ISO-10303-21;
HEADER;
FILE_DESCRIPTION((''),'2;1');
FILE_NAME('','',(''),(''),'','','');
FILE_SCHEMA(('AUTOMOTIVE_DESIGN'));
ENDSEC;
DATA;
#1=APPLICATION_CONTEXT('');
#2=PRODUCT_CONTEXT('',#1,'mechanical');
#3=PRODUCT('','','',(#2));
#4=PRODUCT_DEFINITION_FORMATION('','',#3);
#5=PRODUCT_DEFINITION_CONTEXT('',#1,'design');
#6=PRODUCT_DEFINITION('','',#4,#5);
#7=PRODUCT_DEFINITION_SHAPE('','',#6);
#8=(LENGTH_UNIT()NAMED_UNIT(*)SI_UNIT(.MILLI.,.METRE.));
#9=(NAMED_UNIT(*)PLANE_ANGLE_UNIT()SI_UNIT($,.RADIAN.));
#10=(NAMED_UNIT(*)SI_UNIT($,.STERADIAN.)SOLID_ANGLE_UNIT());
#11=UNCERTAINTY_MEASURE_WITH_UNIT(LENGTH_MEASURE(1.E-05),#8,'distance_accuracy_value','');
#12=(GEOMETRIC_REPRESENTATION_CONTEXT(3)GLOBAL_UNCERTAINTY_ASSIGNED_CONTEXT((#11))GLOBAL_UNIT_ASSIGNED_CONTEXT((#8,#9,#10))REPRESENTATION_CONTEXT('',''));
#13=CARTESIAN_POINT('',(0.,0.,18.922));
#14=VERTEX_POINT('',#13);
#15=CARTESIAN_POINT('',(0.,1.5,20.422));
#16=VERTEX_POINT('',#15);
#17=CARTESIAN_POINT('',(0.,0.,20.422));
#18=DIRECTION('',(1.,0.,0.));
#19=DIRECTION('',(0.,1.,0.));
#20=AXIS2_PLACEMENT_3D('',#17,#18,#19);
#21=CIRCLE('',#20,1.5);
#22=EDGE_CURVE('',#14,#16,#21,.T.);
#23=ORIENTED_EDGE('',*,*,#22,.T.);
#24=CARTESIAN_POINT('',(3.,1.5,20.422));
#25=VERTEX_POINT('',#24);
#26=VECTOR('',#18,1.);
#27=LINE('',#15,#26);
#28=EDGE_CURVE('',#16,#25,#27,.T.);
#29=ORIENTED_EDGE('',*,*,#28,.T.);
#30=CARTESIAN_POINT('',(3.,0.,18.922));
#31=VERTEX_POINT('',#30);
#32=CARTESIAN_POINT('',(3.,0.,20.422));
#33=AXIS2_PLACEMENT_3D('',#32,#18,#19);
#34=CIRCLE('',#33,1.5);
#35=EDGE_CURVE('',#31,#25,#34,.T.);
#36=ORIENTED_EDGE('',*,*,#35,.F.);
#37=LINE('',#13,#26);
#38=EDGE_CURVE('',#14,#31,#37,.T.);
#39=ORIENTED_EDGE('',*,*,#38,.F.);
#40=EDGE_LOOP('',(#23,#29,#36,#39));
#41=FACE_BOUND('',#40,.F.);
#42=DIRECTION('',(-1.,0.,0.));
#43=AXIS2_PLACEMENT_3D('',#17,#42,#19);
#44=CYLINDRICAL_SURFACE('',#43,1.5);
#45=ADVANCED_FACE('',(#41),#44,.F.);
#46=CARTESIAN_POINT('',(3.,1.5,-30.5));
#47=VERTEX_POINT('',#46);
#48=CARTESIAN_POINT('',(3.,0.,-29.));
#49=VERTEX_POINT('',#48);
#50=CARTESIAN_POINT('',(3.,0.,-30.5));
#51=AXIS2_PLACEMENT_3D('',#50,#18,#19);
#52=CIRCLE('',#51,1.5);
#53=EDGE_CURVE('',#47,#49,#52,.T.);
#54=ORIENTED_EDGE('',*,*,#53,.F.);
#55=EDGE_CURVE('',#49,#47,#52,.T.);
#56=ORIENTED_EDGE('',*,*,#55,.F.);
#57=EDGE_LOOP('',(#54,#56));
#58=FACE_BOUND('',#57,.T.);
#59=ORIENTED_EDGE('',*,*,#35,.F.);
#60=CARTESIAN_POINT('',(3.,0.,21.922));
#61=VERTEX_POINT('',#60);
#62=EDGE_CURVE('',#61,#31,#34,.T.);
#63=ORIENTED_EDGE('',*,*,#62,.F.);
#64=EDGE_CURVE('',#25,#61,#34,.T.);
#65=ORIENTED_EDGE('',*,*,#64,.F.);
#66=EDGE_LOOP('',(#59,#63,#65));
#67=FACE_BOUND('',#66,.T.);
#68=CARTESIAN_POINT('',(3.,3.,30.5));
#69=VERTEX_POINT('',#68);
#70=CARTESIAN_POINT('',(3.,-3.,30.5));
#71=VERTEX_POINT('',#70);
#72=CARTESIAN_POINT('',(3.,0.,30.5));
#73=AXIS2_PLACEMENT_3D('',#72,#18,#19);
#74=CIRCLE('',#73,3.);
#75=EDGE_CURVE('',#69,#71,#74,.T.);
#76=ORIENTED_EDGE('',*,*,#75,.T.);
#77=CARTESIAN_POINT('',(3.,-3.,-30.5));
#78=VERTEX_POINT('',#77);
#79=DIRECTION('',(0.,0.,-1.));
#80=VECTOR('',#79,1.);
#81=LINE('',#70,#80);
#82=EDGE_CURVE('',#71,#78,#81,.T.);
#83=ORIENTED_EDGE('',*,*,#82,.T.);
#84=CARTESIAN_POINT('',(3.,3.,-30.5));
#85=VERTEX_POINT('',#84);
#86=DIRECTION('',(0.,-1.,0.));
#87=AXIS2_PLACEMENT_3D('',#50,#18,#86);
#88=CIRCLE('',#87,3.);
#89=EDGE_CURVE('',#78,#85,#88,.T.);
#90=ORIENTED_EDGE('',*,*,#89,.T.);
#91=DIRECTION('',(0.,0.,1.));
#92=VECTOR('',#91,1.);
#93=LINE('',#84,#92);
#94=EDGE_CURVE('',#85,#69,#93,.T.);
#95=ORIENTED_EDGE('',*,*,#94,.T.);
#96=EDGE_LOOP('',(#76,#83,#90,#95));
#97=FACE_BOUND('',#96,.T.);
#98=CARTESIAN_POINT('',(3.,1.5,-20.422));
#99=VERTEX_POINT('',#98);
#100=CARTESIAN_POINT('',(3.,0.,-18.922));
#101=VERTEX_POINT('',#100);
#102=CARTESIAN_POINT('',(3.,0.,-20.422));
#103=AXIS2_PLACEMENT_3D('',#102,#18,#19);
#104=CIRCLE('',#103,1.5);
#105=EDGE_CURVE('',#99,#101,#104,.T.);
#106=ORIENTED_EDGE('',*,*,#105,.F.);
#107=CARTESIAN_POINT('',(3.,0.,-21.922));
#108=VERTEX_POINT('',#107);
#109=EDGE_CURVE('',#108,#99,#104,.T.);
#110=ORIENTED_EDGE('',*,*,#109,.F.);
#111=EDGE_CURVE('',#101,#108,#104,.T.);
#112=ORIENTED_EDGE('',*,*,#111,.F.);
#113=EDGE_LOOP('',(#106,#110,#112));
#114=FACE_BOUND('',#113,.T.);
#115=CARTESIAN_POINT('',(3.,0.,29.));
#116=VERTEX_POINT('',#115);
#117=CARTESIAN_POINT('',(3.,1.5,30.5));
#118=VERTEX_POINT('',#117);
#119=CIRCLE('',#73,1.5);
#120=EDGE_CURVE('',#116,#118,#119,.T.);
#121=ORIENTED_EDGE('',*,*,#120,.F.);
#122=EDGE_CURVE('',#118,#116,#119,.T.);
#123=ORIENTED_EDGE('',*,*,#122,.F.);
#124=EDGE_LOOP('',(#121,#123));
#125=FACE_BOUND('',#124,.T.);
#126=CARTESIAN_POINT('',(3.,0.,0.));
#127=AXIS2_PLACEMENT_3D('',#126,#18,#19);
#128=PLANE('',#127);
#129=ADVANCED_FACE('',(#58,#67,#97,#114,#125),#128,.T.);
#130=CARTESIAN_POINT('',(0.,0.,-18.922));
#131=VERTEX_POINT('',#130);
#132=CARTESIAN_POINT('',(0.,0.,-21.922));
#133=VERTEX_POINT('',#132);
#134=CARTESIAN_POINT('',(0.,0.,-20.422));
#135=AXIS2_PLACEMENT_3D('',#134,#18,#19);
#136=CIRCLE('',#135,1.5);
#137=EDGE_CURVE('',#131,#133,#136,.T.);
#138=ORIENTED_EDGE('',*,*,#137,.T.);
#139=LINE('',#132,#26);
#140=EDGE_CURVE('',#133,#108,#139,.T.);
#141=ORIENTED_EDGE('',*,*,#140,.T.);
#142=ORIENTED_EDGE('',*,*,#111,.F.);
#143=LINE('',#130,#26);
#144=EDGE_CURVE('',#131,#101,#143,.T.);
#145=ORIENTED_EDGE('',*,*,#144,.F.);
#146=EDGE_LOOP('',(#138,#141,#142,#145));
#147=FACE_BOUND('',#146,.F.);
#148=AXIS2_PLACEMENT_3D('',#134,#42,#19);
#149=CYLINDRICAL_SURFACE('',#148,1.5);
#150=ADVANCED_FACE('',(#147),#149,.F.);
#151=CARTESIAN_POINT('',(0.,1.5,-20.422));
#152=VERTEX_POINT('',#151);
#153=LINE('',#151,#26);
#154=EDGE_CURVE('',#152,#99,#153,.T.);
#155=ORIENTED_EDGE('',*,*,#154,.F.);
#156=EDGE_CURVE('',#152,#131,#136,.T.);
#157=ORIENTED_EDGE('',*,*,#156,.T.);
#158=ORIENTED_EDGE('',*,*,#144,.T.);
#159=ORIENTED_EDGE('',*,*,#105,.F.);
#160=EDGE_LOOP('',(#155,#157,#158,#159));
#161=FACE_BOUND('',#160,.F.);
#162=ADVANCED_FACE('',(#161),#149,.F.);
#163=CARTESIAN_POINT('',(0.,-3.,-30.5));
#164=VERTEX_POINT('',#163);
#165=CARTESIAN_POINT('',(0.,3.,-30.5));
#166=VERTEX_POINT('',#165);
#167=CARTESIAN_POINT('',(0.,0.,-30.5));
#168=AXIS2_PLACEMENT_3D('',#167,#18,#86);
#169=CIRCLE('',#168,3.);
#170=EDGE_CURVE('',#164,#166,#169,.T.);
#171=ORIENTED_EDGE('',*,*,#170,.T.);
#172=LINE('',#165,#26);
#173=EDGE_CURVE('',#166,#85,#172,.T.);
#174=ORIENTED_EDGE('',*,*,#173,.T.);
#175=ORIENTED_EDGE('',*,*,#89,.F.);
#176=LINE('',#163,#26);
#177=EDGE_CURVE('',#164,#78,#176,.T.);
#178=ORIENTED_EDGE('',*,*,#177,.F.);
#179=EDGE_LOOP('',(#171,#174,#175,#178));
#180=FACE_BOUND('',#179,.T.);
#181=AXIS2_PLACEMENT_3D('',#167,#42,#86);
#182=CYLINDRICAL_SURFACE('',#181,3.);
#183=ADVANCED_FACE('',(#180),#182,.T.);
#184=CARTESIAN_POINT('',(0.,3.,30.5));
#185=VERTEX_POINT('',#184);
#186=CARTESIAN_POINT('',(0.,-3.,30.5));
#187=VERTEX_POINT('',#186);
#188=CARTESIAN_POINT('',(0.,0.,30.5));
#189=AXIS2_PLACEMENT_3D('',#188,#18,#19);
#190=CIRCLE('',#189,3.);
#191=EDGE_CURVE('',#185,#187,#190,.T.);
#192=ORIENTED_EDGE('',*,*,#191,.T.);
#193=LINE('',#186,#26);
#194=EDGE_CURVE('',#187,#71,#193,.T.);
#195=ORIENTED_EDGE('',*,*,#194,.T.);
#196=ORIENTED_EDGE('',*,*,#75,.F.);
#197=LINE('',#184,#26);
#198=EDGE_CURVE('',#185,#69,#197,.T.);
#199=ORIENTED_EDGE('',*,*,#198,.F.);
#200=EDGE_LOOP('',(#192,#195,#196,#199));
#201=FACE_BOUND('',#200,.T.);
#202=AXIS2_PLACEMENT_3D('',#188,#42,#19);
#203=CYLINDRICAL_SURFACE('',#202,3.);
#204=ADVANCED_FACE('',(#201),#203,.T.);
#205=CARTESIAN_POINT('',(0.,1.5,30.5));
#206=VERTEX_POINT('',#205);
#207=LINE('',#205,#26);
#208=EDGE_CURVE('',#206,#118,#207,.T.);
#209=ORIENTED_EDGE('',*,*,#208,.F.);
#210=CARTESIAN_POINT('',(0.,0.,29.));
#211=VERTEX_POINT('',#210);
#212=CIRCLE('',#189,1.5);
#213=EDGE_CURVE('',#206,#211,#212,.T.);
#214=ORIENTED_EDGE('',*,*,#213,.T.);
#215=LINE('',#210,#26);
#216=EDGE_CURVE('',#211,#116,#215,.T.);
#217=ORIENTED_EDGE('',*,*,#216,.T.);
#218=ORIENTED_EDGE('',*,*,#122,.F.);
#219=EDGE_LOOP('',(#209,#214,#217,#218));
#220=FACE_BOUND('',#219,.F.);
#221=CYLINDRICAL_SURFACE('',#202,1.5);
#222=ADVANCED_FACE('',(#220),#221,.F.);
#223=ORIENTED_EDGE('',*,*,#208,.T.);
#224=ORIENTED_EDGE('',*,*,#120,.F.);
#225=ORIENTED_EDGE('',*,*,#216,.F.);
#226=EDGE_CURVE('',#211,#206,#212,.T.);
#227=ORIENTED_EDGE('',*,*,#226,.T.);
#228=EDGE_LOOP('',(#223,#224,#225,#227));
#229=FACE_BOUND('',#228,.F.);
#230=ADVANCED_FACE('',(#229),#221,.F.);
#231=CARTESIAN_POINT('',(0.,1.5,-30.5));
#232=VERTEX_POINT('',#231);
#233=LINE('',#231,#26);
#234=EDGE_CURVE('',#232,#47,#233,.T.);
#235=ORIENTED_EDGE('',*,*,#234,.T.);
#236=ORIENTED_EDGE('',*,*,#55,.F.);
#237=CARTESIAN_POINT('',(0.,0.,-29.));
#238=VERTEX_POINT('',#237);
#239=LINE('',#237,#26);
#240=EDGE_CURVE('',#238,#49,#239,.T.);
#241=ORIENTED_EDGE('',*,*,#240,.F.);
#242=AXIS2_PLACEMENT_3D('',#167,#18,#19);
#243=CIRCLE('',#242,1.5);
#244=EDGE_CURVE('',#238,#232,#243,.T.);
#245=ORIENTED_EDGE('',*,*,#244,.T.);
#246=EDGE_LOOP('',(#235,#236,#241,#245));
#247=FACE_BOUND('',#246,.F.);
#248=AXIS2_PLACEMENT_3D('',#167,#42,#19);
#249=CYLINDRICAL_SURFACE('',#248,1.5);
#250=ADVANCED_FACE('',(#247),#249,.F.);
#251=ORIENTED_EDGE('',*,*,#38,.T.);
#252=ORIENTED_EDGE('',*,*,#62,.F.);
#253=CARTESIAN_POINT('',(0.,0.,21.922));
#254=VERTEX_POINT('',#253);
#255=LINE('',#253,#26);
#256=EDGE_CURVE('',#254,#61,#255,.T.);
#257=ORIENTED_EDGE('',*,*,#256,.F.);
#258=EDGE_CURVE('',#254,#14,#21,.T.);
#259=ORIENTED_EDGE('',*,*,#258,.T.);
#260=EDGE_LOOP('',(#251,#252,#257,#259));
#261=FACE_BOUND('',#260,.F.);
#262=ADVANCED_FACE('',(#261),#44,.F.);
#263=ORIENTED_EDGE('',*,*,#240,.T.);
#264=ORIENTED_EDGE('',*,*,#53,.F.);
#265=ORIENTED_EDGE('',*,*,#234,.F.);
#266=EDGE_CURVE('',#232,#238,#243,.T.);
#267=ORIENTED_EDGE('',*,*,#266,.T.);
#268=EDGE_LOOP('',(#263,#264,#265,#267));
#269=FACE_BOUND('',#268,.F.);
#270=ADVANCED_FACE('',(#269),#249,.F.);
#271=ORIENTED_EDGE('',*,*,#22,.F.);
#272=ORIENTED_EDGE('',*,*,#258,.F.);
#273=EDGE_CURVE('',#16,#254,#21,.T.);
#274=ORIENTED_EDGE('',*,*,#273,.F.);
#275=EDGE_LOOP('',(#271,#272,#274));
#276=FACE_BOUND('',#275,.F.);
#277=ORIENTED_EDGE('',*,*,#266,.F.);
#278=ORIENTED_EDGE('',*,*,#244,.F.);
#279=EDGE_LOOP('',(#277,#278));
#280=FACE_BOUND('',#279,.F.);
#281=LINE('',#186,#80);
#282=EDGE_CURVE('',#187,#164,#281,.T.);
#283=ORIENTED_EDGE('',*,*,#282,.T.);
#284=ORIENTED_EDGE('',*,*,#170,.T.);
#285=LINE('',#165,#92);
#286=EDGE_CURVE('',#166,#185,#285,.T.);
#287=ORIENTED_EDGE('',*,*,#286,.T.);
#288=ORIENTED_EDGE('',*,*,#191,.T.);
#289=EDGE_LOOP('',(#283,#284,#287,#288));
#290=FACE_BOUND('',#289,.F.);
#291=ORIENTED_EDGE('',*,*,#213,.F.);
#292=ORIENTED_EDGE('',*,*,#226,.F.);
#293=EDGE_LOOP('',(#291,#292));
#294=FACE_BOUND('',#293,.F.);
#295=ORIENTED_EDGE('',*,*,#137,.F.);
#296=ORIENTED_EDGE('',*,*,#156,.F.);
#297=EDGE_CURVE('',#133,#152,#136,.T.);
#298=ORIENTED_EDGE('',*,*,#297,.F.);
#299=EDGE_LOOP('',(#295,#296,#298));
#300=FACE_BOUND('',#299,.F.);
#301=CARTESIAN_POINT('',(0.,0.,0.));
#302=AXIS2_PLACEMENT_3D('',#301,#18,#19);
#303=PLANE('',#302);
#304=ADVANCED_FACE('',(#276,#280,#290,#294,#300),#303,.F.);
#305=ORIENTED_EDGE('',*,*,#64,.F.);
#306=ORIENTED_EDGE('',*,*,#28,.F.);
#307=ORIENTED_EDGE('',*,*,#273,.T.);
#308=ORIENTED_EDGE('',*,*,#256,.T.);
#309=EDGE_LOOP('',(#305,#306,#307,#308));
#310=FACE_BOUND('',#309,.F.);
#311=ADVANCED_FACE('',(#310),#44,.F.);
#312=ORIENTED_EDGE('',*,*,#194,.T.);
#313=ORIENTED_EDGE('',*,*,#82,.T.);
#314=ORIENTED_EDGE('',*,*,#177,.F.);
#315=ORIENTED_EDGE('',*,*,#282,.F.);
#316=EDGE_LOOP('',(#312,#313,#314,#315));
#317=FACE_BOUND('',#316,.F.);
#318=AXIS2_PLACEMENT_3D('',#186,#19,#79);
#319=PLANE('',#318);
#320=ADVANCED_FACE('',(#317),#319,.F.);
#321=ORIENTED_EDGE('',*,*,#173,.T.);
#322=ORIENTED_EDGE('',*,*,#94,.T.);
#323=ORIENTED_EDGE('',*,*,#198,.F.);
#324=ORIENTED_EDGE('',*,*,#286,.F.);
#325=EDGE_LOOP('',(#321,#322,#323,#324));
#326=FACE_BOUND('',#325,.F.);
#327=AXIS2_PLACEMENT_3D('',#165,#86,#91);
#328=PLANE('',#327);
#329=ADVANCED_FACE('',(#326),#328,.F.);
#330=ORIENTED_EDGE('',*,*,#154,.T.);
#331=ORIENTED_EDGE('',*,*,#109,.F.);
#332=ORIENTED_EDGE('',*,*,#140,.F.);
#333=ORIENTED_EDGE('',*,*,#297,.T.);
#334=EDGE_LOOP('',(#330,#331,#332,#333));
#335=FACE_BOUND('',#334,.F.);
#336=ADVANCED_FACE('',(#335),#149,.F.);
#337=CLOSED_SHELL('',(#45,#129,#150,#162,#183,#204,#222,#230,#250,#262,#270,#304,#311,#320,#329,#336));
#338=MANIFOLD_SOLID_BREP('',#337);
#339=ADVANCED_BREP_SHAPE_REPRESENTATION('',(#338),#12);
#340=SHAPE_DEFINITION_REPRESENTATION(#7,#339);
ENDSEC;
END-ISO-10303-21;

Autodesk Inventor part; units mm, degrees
ref_plane "YZ Plane" through (0, 0, 0) normal (1, 0, 0) x (0, 1, 0)
ref_plane "XZ Plane" through (0, 0, 0) normal (0, 1, 0) x (-1, 0, 0)
ref_plane "XY Plane" through (0, 0, 0) normal (0, 0, 1) x (1, 0, 0)
sketch "Sketch1" plane through (0, 0, 0) normal (1, 0, 0) x (0, 1, 0)
  line L0 (0, -30.5) -> (0, 30.5)
  line L1 (0, 20.422) -> (0, -20.422)
  circle A0 centre (0, 20.422) radius 1.5
  circle A1 centre (0, 30.5) radius 1.5
  circle A2 centre (0, -20.422) radius 1.5
  circle A3 centre (0, -30.5) radius 1.5
  line L2 (0, 30.5) -> (0, -30.5) construction
  line L3 (-3, 30.5) -> (-3, -30.5)
  line L4 (3, -30.5) -> (3, 30.5)
  arc A4 (3, 30.5) -> (-3, 30.5) centre (0, 30.5) ccw
  arc A5 (-3, -30.5) -> (3, -30.5) centre (0, -30.5) ccw
  point P0 (0, 0)
  point P1 (0, 0)
  dimension "d0" = 61
  dimension "d1" = 40.844
  dimension "d2" = 3
  dimension "d3" = 3
  dimension "d4" = 3
  dimension "d5" = 3
  dimension "d6" = 6
extrude "Extrusion1" add sketch "Sketch1" along normal blind 3
properties part number "wago_support_support"
